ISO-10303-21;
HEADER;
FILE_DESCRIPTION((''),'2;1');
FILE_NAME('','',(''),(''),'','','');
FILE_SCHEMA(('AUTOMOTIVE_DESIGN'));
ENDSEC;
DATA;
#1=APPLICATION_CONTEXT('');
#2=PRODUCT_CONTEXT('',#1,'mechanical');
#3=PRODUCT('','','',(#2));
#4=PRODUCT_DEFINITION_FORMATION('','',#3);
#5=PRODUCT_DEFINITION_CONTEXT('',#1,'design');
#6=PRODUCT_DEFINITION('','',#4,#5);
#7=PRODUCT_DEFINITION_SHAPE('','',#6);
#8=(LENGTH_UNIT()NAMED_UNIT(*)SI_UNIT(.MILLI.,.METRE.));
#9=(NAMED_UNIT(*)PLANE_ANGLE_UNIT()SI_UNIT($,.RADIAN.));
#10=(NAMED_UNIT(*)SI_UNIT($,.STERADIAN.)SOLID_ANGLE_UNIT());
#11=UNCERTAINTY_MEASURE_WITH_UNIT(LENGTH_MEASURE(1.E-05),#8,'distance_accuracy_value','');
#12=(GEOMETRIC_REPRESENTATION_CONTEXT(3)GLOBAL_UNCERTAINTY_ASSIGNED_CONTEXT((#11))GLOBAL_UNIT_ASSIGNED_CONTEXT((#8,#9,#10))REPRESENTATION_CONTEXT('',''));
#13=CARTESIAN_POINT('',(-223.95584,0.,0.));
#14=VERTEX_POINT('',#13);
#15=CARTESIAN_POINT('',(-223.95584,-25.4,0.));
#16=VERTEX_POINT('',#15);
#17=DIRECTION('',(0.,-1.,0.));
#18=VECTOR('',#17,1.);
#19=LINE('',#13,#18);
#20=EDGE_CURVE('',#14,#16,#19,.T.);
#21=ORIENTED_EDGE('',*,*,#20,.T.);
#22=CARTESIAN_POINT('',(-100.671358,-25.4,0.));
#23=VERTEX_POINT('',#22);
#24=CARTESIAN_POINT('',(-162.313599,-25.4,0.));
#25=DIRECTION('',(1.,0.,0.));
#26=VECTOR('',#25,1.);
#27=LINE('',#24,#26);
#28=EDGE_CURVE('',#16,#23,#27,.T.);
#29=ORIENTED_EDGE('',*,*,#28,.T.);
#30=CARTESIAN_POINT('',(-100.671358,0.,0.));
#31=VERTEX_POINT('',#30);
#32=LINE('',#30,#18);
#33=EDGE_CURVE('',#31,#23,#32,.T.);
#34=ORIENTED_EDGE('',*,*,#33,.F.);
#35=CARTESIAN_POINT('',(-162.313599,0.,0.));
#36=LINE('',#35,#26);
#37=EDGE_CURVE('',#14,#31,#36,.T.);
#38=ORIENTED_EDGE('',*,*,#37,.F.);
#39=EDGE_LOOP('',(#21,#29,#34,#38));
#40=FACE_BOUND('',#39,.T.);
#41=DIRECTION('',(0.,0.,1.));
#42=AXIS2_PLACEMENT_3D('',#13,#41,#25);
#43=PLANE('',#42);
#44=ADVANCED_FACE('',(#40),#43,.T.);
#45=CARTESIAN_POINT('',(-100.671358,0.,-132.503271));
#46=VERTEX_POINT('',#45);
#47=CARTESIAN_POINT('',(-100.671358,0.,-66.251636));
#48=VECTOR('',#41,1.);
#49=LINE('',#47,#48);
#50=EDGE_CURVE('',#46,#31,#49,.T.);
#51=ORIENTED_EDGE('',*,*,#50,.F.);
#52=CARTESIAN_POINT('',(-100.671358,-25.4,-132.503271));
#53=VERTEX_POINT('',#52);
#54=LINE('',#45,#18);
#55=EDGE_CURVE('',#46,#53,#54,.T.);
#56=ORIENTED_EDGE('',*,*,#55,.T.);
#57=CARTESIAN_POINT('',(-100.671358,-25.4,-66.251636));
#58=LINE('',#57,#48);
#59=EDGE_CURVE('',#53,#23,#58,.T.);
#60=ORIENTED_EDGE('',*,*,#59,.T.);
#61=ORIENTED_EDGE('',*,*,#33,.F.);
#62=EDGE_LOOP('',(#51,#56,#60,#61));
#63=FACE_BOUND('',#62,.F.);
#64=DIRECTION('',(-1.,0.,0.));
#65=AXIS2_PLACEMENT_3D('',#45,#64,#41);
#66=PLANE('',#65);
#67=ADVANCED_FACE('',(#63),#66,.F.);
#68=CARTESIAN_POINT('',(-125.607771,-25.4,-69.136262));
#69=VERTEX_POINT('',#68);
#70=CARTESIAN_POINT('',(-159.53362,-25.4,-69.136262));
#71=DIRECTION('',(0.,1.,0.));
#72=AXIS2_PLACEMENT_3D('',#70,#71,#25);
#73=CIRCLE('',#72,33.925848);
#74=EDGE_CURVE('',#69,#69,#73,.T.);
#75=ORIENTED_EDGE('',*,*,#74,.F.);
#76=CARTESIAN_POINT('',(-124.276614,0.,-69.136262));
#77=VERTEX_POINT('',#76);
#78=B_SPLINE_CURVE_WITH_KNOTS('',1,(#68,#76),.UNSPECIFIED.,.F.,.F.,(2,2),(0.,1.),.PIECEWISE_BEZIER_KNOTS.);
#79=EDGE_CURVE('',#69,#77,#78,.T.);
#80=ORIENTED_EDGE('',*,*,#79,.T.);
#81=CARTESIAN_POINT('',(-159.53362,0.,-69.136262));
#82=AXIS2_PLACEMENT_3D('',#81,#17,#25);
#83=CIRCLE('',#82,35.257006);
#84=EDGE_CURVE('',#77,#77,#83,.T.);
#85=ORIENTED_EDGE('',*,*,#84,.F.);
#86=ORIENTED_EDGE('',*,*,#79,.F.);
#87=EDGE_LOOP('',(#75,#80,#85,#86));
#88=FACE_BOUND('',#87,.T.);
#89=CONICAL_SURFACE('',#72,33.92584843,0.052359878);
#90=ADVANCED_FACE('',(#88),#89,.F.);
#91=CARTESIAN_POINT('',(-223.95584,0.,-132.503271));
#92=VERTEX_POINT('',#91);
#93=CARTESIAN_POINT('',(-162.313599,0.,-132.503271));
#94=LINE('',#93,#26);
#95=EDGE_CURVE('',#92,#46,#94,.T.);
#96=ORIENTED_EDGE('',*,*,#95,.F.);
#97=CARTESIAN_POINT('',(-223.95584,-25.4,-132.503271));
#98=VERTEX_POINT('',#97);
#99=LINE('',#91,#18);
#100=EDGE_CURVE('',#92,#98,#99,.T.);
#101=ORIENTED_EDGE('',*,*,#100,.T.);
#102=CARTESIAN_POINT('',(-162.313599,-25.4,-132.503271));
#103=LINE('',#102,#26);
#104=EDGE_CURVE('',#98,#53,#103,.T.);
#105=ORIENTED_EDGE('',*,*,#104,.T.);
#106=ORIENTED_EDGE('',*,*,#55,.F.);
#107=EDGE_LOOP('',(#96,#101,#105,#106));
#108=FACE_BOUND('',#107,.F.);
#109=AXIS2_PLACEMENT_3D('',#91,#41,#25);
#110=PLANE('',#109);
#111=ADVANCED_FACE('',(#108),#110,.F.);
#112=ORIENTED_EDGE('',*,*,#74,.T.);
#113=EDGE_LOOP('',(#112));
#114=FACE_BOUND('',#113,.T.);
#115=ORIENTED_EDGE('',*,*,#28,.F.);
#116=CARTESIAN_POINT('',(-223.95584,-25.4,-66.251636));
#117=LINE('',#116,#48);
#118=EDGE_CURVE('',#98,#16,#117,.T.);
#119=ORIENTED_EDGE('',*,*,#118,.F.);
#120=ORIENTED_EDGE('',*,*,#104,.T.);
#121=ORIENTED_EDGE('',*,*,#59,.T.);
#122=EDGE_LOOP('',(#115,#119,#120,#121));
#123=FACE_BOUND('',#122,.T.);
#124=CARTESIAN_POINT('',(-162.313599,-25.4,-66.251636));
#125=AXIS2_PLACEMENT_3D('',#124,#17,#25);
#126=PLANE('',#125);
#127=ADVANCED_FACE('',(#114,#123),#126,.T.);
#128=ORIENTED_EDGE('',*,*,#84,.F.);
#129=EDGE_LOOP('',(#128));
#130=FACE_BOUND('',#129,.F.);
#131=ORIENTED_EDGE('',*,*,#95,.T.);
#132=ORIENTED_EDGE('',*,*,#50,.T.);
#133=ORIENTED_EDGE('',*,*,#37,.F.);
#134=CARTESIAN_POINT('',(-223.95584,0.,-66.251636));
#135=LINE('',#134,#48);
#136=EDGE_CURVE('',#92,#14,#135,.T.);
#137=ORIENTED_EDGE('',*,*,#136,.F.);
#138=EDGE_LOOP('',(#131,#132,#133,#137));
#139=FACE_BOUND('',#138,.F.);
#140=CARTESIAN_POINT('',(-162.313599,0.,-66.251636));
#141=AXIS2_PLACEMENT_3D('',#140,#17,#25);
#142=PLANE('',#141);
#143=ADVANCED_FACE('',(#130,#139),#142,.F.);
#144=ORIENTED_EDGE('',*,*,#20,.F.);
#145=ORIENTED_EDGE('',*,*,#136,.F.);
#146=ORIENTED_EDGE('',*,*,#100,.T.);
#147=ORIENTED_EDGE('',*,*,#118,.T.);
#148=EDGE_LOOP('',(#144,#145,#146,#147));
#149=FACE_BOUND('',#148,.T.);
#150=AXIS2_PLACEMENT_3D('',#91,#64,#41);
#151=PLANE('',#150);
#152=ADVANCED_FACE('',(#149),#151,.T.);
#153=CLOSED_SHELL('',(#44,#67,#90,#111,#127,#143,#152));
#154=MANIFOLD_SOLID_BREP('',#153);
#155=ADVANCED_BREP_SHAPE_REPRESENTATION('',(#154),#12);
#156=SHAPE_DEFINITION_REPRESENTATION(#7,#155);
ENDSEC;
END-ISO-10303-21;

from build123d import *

# Parameters (mm, degrees)
F0_W     = 123.2844814658
F0_H     = 132.5032711029
F1_DEPTH = 25.4
F2_R     = 33.9258484302
F3_DEPTH = 25.4
F3_TAPER = -3


with BuildPart() as f1:
    # F0 (on Front) → F1 (new body)
    with BuildSketch(Plane.XZ):
        with Locations((-162.3135991395, -66.2516355515)):
            Rectangle(F0_W, F0_H)
    extrude(amount=F1_DEPTH)

    # F2 (on face) → F3 (cut)
    with BuildSketch(Plane.XZ.offset(25.4)):
        with Locations((-159.5336198807, -69.13626194)):
            Circle(F2_R)
    extrude(amount=-F3_DEPTH, taper=F3_TAPER, mode=Mode.SUBTRACT)


solid = f1.part
